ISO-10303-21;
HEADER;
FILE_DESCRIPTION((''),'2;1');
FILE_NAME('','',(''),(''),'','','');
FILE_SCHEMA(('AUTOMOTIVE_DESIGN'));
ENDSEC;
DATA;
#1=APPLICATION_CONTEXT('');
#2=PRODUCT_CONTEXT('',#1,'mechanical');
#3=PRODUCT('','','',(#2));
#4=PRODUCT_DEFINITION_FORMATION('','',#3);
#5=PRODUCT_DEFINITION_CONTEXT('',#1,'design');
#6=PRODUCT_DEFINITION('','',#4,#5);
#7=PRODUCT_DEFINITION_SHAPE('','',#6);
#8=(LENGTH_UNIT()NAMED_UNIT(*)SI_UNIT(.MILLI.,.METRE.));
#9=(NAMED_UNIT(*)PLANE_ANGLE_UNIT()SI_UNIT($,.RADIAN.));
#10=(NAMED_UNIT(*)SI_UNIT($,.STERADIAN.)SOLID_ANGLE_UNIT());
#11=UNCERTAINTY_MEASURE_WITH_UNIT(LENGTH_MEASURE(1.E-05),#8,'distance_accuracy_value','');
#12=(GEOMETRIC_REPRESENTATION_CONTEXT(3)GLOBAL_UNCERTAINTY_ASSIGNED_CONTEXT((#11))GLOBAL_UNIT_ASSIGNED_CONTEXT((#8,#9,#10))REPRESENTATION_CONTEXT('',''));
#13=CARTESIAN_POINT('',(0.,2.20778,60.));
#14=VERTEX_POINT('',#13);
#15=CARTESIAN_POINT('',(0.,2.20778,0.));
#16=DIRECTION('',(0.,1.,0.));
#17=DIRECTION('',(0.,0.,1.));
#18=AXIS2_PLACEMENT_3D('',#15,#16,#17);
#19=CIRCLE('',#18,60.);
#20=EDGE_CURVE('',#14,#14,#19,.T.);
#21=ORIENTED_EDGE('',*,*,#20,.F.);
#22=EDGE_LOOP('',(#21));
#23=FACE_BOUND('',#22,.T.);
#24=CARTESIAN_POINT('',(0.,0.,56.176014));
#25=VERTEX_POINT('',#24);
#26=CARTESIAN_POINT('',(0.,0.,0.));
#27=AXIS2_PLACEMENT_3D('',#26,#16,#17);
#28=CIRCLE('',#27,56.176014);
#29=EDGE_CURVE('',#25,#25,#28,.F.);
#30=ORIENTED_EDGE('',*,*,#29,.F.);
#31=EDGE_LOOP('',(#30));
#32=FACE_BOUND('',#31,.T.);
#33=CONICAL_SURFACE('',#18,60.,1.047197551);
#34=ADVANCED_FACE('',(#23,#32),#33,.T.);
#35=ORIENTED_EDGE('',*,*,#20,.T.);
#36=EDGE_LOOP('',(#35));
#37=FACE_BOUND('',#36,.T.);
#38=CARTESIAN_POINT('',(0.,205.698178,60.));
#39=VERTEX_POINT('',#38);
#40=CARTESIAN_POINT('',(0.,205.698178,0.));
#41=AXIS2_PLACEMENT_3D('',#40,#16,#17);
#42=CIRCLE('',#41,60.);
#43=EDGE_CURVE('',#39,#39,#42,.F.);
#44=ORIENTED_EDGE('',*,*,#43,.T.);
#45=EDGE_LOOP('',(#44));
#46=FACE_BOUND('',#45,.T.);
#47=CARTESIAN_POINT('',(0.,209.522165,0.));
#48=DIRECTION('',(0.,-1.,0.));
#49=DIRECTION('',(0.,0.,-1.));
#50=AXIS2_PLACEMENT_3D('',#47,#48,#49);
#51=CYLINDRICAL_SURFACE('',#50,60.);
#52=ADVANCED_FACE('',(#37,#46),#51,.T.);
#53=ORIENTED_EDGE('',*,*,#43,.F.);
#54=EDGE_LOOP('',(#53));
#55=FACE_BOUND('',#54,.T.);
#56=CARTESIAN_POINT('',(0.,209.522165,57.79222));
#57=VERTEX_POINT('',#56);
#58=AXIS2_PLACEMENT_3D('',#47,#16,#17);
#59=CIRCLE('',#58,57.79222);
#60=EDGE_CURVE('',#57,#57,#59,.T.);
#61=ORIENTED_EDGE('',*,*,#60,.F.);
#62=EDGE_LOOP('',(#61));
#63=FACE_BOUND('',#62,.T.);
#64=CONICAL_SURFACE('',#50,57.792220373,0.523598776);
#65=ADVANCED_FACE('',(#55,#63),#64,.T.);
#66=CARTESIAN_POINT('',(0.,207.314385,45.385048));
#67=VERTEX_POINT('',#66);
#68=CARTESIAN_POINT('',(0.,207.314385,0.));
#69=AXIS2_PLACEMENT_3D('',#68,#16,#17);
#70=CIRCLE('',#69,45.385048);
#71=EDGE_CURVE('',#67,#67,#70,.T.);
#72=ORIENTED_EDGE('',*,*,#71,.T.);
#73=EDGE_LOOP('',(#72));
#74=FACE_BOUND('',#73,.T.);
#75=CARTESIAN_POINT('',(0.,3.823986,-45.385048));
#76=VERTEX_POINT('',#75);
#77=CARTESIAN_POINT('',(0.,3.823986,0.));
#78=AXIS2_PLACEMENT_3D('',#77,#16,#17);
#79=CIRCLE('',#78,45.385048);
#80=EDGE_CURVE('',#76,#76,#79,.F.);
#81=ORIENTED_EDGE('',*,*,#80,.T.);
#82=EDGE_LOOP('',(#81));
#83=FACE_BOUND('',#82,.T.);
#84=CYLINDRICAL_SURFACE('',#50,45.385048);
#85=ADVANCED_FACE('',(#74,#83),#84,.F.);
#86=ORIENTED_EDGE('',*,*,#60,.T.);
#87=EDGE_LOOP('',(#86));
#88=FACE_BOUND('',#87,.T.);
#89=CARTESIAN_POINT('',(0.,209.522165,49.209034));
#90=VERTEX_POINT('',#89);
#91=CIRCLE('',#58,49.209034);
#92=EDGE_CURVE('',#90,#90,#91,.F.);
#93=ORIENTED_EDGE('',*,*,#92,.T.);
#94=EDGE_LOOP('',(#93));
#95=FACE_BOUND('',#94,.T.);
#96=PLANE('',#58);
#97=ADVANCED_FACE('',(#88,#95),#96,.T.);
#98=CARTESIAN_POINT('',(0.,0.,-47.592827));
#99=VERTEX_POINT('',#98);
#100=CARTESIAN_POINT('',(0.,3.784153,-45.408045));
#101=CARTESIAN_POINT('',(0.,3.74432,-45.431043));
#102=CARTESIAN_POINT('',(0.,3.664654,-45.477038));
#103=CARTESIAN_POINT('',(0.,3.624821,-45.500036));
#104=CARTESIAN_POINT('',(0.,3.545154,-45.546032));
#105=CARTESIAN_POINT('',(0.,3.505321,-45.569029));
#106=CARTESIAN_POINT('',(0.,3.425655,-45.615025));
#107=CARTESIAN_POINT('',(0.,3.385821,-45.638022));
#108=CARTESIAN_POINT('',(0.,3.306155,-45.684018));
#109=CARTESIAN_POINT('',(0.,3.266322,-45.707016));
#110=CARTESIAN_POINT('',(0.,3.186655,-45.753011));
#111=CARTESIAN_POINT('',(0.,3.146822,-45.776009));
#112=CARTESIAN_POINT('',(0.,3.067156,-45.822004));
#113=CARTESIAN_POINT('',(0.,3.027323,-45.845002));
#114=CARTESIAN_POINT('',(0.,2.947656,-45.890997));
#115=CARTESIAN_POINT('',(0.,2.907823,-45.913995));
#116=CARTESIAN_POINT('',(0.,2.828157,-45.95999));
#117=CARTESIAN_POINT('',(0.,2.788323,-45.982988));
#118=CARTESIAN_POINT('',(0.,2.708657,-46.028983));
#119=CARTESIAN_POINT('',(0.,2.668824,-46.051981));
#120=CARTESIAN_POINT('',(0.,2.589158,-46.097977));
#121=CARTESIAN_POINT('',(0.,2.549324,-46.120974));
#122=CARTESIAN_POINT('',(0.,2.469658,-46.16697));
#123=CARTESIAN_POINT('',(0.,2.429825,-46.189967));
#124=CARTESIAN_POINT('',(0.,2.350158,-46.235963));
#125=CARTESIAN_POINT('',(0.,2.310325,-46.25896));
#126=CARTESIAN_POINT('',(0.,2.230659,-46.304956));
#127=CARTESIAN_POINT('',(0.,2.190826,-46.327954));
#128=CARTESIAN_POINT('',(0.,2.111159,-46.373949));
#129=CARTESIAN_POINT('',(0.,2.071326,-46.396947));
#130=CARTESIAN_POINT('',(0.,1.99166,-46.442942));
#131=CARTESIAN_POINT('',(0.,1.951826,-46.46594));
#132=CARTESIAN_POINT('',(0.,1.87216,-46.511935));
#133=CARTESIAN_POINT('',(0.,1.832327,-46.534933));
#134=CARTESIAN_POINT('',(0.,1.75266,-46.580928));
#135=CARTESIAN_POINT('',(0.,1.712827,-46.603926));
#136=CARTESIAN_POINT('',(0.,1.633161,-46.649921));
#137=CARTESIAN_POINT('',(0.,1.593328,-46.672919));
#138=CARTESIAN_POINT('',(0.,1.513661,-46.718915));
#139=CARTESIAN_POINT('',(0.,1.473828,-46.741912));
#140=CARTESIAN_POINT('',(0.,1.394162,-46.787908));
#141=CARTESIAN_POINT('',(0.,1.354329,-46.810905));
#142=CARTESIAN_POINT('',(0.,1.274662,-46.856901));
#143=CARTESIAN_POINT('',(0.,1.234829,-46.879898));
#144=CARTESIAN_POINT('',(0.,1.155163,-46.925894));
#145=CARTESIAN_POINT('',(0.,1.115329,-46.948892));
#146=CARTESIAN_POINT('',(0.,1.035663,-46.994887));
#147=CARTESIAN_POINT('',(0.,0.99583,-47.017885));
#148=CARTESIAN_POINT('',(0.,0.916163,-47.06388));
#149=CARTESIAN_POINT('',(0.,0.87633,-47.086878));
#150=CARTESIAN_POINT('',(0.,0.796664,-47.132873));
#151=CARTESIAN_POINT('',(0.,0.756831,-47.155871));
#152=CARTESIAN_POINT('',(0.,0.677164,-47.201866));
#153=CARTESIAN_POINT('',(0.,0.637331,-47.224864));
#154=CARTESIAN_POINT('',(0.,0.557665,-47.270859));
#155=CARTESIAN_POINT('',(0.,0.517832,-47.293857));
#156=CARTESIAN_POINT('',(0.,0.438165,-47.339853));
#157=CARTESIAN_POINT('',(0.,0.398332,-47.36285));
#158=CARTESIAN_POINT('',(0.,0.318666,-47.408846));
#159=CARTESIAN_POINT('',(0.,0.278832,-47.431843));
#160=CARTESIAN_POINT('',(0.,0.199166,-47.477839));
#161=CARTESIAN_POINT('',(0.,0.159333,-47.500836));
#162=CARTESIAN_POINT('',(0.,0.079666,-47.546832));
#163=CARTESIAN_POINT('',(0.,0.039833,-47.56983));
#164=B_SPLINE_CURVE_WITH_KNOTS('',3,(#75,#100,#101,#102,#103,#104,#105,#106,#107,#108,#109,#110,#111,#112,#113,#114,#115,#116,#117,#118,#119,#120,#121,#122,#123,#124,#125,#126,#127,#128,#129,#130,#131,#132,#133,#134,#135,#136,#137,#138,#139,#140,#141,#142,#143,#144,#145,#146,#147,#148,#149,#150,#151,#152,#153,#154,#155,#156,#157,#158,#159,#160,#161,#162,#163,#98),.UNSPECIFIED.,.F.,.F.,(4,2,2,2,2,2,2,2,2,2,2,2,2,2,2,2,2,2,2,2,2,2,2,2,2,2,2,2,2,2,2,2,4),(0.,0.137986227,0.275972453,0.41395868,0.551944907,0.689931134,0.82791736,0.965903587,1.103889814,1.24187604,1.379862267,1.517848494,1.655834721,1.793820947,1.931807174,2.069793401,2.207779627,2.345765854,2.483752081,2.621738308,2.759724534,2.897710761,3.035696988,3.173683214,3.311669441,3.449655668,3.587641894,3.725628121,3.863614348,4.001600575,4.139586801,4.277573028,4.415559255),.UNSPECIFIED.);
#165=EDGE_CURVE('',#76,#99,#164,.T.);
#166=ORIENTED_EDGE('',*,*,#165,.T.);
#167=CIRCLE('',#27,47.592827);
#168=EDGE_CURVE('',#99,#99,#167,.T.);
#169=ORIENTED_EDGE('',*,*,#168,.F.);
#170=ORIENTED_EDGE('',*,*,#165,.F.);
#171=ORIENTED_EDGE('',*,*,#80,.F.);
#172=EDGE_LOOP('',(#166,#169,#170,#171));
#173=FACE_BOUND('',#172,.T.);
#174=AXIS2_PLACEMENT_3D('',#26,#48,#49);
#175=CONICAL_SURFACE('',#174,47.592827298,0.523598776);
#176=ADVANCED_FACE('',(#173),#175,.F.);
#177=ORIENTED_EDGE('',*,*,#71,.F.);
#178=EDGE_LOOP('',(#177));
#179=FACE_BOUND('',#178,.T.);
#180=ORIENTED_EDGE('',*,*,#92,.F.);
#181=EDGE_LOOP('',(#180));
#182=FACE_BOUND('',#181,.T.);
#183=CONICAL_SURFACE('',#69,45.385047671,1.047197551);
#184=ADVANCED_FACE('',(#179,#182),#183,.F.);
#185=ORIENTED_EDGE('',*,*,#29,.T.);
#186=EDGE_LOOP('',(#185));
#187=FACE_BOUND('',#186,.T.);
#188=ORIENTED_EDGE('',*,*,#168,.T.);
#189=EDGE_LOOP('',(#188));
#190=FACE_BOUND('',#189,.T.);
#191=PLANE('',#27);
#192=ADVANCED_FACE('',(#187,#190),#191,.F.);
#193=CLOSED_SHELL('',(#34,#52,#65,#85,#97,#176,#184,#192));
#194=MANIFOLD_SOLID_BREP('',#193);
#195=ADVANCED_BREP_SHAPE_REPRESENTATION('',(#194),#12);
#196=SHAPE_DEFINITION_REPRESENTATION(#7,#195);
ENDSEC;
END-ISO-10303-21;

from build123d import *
from OCP.BRepFilletAPI import BRepFilletAPI_MakeChamfer

# Parameters (mm, degrees)
SKETCH1_R           = 60
BOSS_EXTRUDE1_DEPTH = 209.522164871
SKETCH2_R           = 45.385047671
CUT_EXTRUDE1_DEPTH  = 227.052068276
CHAMFER1_SIZE       = 3.823986487
CHAMFER1_SIZE2      = 2.207779627


with BuildPart() as part:
    # Sketch1 → Boss-Extrude1 (new body)
    with BuildSketch(Plane(origin=(0, 0, 0), x_dir=(1, 0, 0), z_dir=(0, 1, 0))):
        Circle(SKETCH1_R)
    extrude(amount=BOSS_EXTRUDE1_DEPTH)

    # Sketch2 → Cut-Extrude1 (cut, through all)
    with BuildSketch(Plane(origin=(0, 0, 0), x_dir=(1, 0, 0), z_dir=(0, 1, 0))):
        Circle(SKETCH2_R)
    extrude(amount=CUT_EXTRUDE1_DEPTH, mode=Mode.SUBTRACT)

    # Chamfer1: one chamfer whose edges measure the first distance from different faces: ONE call of the kernel's chamfer builder (chamfer() names one face for all edges)
    chamfer1_edges_1 = [part.edges().sort_by_distance(p)[0] for p in [
        (-45.385047671, 209.522164871, 0),
    ]]
    chamfer1_side_1 = [part.faces().sort_by_distance(p)[0] for p in [
        (-58.302943725, 209.522164871, 0),
    ]]
    chamfer1_edges_2 = [part.edges().sort_by_distance(p)[0] for p in [
        (-45.385047671, 0, 0),
    ]]
    chamfer1_side_2 = [part.faces().sort_by_distance(p)[0] for p in [
        (-45.385047671, 104.761082435, 0),
    ]]
    chamfer1_edges_3 = [part.edges().sort_by_distance(p)[0] for p in [
        (-60, 0, 0),
    ]]
    chamfer1_side_3 = [part.faces().sort_by_distance(p)[0] for p in [
        (-58.302943725, 0, 0),
    ]]
    chamfer1_edges_4 = [part.edges().sort_by_distance(p)[0] for p in [
        (-60, 209.522164871, 0),
    ]]
    chamfer1_side_4 = [part.faces().sort_by_distance(p)[0] for p in [
        (-60, 104.761082435, 0),
    ]]
    chamfer1 = BRepFilletAPI_MakeChamfer(part.part.solid().wrapped)
    for e in chamfer1_edges_1:
        chamfer1.Add(CHAMFER1_SIZE, CHAMFER1_SIZE2, e.wrapped, chamfer1_side_1[0].wrapped)  # the first distance lies on this face
    for e in chamfer1_edges_2:
        chamfer1.Add(CHAMFER1_SIZE, CHAMFER1_SIZE2, e.wrapped, chamfer1_side_2[0].wrapped)  # the first distance lies on this face
    for e in chamfer1_edges_3:
        chamfer1.Add(CHAMFER1_SIZE, CHAMFER1_SIZE2, e.wrapped, chamfer1_side_3[0].wrapped)  # the first distance lies on this face
    for e in chamfer1_edges_4:
        chamfer1.Add(CHAMFER1_SIZE, CHAMFER1_SIZE2, e.wrapped, chamfer1_side_4[0].wrapped)  # the first distance lies on this face
    add(Compound.cast(chamfer1.Shape()), mode=Mode.REPLACE)


solid = part.part
